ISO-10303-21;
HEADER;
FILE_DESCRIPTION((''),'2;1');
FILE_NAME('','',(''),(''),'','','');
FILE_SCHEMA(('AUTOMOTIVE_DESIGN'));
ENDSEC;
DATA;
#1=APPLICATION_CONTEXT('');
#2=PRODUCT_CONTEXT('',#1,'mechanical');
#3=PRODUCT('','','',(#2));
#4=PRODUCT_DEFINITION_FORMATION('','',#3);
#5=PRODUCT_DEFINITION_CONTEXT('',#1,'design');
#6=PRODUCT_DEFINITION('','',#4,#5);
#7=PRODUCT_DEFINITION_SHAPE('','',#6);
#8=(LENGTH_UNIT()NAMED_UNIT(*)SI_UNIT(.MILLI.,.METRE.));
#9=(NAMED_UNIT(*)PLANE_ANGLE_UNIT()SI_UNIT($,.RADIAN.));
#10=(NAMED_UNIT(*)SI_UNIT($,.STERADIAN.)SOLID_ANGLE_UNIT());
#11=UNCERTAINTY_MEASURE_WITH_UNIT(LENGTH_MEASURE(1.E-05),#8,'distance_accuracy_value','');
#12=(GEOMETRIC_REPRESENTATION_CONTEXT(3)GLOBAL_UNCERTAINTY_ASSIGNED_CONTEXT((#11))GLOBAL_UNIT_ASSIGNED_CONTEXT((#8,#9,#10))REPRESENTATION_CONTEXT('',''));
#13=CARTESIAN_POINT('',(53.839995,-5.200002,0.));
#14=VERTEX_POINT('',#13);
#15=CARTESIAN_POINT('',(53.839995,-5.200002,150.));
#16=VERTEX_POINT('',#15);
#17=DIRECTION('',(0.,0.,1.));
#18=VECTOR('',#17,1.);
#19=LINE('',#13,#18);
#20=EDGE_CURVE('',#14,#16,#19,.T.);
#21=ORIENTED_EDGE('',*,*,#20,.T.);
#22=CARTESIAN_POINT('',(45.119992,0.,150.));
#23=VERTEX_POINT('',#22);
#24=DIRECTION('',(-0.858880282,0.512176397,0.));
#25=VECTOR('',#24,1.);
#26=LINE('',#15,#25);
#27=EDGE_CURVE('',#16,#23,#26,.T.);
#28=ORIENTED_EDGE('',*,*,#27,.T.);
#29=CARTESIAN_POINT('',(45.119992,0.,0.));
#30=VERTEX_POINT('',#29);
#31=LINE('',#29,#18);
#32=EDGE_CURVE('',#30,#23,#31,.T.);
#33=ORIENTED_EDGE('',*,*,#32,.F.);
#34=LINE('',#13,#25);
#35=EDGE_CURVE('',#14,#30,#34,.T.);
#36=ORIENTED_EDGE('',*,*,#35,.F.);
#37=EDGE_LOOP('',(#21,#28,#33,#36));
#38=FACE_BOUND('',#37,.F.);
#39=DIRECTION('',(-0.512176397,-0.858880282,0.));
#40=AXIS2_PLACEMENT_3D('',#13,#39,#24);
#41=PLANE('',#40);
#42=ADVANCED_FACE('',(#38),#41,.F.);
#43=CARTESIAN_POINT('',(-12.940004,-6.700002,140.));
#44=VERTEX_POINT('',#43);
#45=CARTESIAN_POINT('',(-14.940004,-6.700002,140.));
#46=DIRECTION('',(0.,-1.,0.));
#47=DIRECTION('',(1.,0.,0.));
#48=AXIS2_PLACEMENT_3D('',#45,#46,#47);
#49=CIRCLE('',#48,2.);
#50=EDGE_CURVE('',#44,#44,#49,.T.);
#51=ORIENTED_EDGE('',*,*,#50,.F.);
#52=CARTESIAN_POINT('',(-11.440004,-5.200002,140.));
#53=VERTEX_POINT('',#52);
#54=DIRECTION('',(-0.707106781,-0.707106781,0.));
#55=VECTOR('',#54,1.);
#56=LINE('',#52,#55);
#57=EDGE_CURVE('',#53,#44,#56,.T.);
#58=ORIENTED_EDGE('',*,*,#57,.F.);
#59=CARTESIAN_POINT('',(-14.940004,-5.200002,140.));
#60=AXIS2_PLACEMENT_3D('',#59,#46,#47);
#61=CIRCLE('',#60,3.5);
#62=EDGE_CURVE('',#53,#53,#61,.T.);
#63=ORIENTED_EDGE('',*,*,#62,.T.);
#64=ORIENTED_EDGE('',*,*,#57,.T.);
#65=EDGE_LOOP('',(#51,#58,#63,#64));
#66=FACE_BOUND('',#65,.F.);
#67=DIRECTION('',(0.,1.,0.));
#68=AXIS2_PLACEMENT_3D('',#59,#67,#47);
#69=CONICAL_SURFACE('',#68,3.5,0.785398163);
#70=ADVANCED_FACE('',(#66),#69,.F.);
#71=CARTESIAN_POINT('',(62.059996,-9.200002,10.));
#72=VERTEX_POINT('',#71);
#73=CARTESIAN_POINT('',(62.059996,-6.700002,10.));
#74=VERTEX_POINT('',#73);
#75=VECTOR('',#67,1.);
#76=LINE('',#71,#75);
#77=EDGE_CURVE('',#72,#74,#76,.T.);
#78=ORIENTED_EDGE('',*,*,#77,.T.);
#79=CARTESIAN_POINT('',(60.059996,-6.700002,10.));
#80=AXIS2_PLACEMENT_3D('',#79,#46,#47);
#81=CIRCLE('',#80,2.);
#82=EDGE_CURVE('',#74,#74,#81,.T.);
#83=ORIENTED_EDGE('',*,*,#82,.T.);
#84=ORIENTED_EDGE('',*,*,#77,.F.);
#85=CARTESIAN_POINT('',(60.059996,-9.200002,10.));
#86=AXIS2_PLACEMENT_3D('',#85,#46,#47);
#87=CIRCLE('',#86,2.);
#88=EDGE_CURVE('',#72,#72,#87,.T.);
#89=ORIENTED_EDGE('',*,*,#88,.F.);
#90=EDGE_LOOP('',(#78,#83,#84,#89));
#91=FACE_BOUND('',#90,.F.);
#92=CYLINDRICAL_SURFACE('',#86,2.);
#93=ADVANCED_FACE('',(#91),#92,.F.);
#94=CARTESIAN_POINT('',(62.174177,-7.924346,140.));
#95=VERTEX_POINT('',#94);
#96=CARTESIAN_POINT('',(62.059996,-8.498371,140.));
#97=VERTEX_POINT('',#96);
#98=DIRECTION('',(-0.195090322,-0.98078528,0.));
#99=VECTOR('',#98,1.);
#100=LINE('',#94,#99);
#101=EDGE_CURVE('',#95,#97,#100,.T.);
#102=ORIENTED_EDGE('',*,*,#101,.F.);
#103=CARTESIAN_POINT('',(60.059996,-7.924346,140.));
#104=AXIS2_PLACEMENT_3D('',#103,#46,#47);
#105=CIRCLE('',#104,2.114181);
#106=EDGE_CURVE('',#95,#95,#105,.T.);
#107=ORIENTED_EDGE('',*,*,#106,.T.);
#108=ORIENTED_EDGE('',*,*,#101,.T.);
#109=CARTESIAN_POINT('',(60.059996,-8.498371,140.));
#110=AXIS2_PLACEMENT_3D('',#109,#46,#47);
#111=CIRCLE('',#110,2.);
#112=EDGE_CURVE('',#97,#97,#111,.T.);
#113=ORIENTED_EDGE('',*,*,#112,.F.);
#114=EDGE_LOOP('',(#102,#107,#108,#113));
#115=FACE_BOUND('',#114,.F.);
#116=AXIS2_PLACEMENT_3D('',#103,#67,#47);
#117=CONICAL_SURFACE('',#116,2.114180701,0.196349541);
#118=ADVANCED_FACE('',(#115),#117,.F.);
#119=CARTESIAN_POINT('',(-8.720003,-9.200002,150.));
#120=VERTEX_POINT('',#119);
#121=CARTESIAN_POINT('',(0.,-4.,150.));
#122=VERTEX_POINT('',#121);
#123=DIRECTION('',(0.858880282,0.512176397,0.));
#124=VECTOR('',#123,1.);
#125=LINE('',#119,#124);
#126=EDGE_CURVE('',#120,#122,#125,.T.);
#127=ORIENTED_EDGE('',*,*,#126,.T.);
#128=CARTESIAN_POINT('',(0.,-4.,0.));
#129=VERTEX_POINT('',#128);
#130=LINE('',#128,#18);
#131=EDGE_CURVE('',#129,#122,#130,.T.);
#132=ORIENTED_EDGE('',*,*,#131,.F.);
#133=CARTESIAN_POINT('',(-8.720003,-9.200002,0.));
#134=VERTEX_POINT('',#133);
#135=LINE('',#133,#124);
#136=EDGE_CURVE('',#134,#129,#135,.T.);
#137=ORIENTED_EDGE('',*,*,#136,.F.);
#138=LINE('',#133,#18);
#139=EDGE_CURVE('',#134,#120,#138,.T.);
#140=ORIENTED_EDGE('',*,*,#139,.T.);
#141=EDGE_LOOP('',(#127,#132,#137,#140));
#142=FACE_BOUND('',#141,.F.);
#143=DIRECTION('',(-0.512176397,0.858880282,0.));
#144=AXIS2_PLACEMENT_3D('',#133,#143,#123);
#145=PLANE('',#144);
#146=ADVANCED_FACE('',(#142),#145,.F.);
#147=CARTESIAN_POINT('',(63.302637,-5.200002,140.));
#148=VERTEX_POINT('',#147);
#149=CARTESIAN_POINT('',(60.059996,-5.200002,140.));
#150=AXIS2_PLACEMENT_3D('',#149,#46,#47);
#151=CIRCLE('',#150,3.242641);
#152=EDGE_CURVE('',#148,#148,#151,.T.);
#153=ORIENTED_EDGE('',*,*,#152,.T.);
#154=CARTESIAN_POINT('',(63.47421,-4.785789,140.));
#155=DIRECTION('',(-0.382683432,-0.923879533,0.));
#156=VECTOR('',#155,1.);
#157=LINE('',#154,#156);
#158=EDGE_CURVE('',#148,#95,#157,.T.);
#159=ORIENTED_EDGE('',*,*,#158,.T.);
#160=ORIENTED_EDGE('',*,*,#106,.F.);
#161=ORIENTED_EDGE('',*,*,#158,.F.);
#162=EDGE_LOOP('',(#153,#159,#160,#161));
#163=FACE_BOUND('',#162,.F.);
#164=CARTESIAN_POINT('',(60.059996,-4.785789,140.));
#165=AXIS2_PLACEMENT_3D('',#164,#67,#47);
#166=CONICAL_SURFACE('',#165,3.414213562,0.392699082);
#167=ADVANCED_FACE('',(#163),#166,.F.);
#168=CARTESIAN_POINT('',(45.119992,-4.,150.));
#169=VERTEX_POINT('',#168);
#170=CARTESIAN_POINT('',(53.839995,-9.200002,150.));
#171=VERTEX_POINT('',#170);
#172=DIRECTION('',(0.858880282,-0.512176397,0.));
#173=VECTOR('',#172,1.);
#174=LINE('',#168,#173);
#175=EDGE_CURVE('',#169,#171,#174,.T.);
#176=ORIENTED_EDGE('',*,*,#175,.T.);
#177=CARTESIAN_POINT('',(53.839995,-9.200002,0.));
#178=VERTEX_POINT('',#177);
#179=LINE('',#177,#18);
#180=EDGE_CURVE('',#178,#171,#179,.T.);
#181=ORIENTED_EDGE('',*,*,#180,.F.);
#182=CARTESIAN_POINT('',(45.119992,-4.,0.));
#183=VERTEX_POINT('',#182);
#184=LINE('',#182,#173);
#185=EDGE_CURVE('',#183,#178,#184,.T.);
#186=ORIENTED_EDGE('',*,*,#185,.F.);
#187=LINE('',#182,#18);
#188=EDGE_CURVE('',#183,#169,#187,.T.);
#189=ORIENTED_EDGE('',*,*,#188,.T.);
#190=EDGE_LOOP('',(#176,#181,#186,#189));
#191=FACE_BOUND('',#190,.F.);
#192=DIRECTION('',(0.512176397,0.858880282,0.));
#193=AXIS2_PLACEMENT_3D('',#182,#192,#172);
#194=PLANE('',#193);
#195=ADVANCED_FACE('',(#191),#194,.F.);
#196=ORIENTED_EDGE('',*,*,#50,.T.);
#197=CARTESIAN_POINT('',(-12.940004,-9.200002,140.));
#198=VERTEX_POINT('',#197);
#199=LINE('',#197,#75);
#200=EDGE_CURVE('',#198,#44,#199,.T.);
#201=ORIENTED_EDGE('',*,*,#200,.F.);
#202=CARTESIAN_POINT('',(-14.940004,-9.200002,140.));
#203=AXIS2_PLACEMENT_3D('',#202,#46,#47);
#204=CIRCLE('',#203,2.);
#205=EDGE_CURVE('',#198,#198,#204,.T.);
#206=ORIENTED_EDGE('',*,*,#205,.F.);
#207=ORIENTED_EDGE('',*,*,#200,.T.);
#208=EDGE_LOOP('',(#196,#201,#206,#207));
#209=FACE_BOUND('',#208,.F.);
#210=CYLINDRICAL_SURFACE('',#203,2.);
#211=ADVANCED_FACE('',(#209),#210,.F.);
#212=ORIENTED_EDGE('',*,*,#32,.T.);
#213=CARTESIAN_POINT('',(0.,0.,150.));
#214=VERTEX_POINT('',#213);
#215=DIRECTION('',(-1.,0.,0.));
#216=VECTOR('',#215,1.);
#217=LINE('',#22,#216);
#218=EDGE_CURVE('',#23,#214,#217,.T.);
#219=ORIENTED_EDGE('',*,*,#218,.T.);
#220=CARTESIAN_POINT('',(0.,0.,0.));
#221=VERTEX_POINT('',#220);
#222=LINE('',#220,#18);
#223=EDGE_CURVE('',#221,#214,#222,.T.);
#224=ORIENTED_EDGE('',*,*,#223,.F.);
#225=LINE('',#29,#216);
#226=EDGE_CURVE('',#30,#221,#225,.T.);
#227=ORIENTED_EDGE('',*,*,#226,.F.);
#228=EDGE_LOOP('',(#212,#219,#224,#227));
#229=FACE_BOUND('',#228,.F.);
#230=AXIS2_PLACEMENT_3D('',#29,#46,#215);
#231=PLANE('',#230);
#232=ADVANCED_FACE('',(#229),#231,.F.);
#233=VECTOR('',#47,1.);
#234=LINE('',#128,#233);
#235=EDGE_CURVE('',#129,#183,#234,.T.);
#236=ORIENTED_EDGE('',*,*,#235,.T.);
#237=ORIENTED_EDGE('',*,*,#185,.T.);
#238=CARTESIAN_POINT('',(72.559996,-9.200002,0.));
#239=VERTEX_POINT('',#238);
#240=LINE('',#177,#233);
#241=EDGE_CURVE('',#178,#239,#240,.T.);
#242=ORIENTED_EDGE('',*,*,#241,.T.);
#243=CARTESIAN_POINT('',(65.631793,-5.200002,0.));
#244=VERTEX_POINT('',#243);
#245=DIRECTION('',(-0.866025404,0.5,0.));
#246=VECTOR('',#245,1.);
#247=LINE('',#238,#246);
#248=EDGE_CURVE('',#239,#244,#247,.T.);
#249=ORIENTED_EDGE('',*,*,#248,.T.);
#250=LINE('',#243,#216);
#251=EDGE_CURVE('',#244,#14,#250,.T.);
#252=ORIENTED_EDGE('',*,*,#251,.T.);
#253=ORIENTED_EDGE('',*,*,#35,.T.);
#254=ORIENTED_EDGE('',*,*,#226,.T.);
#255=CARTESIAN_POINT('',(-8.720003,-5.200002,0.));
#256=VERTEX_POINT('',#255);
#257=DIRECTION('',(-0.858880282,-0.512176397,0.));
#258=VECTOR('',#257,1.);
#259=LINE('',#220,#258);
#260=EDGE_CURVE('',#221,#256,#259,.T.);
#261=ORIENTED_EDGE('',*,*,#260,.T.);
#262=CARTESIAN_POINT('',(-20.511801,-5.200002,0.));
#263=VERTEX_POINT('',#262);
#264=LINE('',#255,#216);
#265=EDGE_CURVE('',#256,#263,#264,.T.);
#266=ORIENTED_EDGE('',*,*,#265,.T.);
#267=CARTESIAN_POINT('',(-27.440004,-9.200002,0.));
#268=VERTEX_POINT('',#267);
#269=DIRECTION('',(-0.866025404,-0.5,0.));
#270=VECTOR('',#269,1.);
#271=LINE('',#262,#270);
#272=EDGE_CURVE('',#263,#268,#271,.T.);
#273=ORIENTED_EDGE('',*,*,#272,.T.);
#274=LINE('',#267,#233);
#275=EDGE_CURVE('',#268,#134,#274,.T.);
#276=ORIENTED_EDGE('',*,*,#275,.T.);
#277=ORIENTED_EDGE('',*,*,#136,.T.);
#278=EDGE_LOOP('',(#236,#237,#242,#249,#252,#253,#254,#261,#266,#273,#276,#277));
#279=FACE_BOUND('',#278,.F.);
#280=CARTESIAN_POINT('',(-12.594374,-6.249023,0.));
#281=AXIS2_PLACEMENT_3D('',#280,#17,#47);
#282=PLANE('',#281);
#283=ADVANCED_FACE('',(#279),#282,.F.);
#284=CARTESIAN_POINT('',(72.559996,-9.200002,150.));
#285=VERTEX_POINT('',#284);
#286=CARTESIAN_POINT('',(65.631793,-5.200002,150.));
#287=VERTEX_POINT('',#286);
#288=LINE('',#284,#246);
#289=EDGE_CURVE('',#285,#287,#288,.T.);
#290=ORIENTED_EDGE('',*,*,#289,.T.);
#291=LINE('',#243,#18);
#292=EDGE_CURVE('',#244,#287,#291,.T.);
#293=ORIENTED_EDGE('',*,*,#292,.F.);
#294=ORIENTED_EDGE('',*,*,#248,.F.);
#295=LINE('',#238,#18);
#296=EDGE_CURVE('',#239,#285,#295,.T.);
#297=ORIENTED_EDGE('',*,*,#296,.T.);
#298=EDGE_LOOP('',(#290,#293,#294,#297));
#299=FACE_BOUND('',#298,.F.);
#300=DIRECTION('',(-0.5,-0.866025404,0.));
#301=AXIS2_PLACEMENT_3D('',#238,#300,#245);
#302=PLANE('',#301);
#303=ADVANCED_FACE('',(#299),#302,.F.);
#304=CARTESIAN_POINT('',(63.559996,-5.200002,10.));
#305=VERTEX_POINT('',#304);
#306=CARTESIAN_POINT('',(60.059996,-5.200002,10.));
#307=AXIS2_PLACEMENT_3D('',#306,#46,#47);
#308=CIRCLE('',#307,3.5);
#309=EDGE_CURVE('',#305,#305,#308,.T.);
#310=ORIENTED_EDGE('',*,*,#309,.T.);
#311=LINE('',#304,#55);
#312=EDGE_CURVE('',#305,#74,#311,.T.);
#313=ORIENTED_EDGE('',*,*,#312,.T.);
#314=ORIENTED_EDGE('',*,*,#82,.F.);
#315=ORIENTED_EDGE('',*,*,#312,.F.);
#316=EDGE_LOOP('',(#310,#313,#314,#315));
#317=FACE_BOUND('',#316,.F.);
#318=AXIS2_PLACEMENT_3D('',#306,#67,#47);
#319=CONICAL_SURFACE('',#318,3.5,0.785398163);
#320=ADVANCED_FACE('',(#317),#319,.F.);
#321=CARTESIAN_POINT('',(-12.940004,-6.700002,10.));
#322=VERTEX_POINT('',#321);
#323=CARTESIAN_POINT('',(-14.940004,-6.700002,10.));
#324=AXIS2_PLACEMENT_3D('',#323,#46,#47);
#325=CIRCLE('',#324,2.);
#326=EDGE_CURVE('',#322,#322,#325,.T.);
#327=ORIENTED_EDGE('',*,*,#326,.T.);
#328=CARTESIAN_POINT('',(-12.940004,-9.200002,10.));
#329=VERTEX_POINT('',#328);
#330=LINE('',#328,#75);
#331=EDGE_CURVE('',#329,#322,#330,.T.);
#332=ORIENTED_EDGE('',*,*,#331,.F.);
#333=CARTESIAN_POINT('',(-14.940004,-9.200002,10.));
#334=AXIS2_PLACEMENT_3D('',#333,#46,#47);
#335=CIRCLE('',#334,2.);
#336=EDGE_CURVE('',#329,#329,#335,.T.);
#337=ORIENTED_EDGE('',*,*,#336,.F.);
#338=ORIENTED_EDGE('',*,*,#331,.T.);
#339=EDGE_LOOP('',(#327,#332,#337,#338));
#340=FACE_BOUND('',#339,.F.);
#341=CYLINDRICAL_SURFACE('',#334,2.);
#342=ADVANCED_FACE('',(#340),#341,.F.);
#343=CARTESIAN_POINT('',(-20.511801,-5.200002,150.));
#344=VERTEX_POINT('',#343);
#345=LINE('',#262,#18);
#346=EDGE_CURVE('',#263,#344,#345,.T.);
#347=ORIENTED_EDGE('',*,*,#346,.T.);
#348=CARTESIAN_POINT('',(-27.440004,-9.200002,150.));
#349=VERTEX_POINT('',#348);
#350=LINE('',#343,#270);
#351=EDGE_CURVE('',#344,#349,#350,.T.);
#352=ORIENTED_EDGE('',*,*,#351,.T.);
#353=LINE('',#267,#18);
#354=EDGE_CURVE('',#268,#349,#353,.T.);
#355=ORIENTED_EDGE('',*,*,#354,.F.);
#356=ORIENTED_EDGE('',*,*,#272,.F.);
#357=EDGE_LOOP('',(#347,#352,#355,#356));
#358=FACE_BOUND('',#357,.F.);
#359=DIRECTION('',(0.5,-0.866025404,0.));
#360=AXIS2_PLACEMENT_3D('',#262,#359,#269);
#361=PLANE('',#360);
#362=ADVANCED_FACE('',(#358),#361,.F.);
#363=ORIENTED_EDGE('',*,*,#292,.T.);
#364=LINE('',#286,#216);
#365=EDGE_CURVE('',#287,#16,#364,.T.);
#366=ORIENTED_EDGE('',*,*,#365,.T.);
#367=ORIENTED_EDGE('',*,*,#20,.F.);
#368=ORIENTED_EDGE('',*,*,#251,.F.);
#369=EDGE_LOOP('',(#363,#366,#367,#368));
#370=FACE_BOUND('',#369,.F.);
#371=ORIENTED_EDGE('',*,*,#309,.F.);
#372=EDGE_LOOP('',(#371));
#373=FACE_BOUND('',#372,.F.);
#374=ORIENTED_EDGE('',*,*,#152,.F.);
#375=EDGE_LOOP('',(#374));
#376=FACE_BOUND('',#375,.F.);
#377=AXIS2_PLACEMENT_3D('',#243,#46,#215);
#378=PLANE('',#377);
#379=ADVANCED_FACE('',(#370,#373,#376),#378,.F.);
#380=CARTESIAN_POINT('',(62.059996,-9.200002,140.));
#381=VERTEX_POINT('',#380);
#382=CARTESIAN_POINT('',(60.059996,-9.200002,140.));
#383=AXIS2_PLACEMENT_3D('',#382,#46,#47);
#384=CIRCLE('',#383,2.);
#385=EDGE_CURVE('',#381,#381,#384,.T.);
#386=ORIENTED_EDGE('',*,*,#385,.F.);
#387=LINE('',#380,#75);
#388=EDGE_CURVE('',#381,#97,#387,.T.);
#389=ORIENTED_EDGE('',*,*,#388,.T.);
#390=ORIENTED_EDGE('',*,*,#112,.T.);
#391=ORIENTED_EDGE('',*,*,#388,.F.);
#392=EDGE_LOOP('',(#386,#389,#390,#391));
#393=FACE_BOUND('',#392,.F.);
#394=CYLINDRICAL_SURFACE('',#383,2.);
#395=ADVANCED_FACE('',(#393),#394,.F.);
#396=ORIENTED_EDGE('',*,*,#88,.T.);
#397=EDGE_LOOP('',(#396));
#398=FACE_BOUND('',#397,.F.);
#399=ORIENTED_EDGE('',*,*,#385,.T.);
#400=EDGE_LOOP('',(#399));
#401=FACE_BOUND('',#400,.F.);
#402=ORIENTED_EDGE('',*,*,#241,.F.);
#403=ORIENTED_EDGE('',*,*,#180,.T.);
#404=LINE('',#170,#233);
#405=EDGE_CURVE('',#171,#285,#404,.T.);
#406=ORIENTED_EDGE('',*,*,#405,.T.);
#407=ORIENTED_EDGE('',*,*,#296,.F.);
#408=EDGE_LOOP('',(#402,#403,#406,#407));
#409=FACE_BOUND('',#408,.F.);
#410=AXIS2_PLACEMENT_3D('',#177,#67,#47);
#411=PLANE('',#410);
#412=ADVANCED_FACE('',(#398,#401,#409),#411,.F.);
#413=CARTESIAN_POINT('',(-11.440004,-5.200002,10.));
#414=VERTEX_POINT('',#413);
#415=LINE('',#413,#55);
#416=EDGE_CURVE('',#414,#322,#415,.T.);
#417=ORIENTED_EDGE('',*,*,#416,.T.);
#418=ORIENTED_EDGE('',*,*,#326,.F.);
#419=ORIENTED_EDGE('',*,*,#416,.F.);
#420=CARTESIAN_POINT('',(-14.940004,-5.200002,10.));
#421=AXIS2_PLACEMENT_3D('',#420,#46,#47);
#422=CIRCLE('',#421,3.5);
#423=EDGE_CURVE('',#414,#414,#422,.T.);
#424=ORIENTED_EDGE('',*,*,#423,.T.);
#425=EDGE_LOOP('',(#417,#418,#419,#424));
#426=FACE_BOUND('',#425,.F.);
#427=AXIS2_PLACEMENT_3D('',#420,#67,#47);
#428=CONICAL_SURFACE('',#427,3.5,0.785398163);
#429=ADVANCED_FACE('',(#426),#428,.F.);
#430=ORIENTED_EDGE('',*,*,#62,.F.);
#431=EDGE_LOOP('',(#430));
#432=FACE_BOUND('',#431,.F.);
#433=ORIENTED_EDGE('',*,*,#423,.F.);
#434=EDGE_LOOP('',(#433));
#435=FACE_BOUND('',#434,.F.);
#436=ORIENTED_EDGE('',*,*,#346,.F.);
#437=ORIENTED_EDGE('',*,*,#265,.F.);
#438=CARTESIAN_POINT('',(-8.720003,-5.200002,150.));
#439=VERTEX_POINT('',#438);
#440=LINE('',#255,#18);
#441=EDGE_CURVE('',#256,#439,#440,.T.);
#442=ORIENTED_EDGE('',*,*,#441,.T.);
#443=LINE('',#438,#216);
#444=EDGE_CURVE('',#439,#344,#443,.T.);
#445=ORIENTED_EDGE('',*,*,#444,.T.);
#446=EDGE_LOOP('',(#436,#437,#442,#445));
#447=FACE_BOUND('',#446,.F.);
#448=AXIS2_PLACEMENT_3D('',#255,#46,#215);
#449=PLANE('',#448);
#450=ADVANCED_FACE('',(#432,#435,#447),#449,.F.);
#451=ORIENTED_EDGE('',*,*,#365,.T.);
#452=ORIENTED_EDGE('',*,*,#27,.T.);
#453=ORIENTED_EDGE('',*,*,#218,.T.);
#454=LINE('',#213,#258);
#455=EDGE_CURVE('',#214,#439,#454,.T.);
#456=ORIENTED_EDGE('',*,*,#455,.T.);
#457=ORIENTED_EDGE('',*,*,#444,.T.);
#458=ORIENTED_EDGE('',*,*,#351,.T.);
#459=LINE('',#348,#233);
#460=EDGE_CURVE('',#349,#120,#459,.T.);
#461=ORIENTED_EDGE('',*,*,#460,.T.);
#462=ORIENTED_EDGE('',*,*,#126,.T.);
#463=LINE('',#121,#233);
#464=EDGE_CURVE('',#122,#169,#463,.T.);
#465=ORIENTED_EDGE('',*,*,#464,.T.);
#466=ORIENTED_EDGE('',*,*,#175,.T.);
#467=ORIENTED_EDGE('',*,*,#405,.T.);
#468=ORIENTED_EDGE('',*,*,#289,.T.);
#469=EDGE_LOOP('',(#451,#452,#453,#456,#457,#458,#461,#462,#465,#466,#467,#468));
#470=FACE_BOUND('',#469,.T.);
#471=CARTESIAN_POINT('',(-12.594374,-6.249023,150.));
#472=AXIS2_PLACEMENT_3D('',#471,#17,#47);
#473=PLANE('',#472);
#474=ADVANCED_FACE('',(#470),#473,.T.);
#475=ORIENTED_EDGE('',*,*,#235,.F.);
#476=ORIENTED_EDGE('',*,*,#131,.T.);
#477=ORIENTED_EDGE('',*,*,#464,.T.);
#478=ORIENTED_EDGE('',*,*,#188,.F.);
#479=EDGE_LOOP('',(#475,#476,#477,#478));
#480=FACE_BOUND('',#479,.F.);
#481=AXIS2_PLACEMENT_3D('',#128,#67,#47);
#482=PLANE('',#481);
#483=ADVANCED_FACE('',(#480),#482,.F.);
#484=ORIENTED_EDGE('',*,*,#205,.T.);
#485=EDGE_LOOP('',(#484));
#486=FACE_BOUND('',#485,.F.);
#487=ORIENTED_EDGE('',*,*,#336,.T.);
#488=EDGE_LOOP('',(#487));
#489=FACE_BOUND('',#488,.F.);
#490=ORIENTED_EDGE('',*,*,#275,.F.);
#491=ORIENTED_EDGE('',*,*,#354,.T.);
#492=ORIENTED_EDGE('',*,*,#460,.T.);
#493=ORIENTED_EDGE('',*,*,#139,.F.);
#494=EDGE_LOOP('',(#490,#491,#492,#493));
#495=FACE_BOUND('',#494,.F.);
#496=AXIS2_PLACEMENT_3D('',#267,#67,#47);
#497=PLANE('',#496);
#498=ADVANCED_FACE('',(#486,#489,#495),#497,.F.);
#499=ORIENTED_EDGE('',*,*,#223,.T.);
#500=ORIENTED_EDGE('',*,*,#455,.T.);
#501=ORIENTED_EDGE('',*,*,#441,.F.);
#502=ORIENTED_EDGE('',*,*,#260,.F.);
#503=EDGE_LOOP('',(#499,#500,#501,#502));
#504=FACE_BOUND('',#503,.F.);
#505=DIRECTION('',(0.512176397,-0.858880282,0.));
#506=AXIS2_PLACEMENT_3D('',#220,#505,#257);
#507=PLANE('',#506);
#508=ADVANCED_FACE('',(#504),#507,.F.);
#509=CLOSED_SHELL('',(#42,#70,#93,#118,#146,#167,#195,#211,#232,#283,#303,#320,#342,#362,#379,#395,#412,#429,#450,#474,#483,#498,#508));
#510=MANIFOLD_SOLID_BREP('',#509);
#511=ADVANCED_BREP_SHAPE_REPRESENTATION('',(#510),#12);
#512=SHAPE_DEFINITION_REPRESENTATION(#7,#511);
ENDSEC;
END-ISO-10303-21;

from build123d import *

# Parameters (mm, degrees)
F0_W     = 22.5599961265
F0_H     = 4
F1_DEPTH = 150
F2_R     = 2
F3_DEPTH = 9.20100235
F4_SIZE  = 1


# Not quite as in the source:
# - a fillet or chamfer that OpenCascade refuses, or shapes differently, is made with other operations: its cross-section is extruded or revolved along the edge and cut away or added


with BuildPart() as f1:
    # F0 (on Top) → F1 (new body)
    with BuildSketch(Plane.XY):
        Polygon((0, -4), (0, 0), (-8.7200025445, -5.20000235), (-20.5118006432, -5.20000235), (-27.4400038735, -9.20000235), (-8.7200025445, -9.20000235), align=None)
        with Locations((11.2799980633, -2)):
            Rectangle(F0_W, F0_H)
        with Locations((33.8399941898, -2)):
            Rectangle(F0_W, F0_H)
        Polygon((53.8399947975, -5.20000235), (45.119992253, 0), (45.119992253, -4), (53.8399947975, -9.20000235), (72.5599961265, -9.20000235), (65.6317928962, -5.20000235), align=None)
    extrude(amount=F1_DEPTH)

    # F2 (on face) → F3 (cut, through all)
    with BuildSketch(Plane.XZ.offset(9.20000235)):
        with Locations((-14.9400038735, 140)):
            Circle(F2_R)
        with Locations((60.0599961265, 140)):
            Circle(F2_R)
        with Locations((-14.9400038735, 10)):
            Circle(F2_R)
        with Locations((60.0599961265, 10)):
            Circle(F2_R)
    extrude(amount=-F3_DEPTH, mode=Mode.SUBTRACT)

    # F4
    f4_edges = [f1.edges().sort_by_distance(p)[0] for p in [
        (58.059996, -5.200002, 140),
    ]]
    chamfer(f4_edges, length=F4_SIZE)

    # F5: chamfer of 2 on 1 edges, made by hand

    # F5_s1 → F5_t2 (revolve, cut)
    with BuildSketch(Plane.XY.offset(140)):
        Polygon((63.4742096889, -4.7857887876), (62.0599961265, -8.20000235), (62.0599961265, -6.20000235), align=None)
    revolve(axis=Axis((60.0599961265, -6.20000235, 140), (0, -1, 0)), mode=Mode.SUBTRACT)

    # F6: chamfer of 1.5 on 4 edges, made by hand

    # F6_s1 → F6_t2 (revolve, cut)
    with BuildSketch(Plane.XY.offset(10)):
        Polygon((63.5599961265, -5.20000235), (62.0599961265, -6.70000235), (62.0599961265, -5.20000235), align=None)
    revolve(axis=Axis((60.0599961265, -5.20000235, 10), (0, -1, 0)), mode=Mode.SUBTRACT)

    # F6_s3 → F6_t4 (revolve, cut)
    with BuildSketch(Plane.XY.offset(10)):
        Polygon((-11.4400038735, -5.20000235), (-12.9400038735, -6.70000235), (-12.9400038735, -5.20000235), align=None)
    revolve(axis=Axis((-14.9400038735, -5.20000235, 10), (0, -1, 0)), mode=Mode.SUBTRACT)

    # F6_s5 → F6_t6 (revolve, cut)
    with BuildSketch(Plane.XY.offset(140)):
        Polygon((-11.4400038735, -5.20000235), (-12.9400038735, -6.70000235), (-12.9400038735, -5.20000235), align=None)
    revolve(axis=Axis((-14.9400038735, -5.20000235, 140), (0, -1, 0)), mode=Mode.SUBTRACT)

    # F6_s7 → F6_t8 (revolve, cut)
    with BuildSketch(Plane.XY.offset(140)):
        Polygon((62.1741768278, -7.9243457525), (62.0599961265, -8.498370901), (62.0599961265, -8.20000235), align=None)
    revolve(axis=Axis((60.0599961265, -8.20000235, 140), (0, -1, 0)), mode=Mode.SUBTRACT)


solid = f1.part
